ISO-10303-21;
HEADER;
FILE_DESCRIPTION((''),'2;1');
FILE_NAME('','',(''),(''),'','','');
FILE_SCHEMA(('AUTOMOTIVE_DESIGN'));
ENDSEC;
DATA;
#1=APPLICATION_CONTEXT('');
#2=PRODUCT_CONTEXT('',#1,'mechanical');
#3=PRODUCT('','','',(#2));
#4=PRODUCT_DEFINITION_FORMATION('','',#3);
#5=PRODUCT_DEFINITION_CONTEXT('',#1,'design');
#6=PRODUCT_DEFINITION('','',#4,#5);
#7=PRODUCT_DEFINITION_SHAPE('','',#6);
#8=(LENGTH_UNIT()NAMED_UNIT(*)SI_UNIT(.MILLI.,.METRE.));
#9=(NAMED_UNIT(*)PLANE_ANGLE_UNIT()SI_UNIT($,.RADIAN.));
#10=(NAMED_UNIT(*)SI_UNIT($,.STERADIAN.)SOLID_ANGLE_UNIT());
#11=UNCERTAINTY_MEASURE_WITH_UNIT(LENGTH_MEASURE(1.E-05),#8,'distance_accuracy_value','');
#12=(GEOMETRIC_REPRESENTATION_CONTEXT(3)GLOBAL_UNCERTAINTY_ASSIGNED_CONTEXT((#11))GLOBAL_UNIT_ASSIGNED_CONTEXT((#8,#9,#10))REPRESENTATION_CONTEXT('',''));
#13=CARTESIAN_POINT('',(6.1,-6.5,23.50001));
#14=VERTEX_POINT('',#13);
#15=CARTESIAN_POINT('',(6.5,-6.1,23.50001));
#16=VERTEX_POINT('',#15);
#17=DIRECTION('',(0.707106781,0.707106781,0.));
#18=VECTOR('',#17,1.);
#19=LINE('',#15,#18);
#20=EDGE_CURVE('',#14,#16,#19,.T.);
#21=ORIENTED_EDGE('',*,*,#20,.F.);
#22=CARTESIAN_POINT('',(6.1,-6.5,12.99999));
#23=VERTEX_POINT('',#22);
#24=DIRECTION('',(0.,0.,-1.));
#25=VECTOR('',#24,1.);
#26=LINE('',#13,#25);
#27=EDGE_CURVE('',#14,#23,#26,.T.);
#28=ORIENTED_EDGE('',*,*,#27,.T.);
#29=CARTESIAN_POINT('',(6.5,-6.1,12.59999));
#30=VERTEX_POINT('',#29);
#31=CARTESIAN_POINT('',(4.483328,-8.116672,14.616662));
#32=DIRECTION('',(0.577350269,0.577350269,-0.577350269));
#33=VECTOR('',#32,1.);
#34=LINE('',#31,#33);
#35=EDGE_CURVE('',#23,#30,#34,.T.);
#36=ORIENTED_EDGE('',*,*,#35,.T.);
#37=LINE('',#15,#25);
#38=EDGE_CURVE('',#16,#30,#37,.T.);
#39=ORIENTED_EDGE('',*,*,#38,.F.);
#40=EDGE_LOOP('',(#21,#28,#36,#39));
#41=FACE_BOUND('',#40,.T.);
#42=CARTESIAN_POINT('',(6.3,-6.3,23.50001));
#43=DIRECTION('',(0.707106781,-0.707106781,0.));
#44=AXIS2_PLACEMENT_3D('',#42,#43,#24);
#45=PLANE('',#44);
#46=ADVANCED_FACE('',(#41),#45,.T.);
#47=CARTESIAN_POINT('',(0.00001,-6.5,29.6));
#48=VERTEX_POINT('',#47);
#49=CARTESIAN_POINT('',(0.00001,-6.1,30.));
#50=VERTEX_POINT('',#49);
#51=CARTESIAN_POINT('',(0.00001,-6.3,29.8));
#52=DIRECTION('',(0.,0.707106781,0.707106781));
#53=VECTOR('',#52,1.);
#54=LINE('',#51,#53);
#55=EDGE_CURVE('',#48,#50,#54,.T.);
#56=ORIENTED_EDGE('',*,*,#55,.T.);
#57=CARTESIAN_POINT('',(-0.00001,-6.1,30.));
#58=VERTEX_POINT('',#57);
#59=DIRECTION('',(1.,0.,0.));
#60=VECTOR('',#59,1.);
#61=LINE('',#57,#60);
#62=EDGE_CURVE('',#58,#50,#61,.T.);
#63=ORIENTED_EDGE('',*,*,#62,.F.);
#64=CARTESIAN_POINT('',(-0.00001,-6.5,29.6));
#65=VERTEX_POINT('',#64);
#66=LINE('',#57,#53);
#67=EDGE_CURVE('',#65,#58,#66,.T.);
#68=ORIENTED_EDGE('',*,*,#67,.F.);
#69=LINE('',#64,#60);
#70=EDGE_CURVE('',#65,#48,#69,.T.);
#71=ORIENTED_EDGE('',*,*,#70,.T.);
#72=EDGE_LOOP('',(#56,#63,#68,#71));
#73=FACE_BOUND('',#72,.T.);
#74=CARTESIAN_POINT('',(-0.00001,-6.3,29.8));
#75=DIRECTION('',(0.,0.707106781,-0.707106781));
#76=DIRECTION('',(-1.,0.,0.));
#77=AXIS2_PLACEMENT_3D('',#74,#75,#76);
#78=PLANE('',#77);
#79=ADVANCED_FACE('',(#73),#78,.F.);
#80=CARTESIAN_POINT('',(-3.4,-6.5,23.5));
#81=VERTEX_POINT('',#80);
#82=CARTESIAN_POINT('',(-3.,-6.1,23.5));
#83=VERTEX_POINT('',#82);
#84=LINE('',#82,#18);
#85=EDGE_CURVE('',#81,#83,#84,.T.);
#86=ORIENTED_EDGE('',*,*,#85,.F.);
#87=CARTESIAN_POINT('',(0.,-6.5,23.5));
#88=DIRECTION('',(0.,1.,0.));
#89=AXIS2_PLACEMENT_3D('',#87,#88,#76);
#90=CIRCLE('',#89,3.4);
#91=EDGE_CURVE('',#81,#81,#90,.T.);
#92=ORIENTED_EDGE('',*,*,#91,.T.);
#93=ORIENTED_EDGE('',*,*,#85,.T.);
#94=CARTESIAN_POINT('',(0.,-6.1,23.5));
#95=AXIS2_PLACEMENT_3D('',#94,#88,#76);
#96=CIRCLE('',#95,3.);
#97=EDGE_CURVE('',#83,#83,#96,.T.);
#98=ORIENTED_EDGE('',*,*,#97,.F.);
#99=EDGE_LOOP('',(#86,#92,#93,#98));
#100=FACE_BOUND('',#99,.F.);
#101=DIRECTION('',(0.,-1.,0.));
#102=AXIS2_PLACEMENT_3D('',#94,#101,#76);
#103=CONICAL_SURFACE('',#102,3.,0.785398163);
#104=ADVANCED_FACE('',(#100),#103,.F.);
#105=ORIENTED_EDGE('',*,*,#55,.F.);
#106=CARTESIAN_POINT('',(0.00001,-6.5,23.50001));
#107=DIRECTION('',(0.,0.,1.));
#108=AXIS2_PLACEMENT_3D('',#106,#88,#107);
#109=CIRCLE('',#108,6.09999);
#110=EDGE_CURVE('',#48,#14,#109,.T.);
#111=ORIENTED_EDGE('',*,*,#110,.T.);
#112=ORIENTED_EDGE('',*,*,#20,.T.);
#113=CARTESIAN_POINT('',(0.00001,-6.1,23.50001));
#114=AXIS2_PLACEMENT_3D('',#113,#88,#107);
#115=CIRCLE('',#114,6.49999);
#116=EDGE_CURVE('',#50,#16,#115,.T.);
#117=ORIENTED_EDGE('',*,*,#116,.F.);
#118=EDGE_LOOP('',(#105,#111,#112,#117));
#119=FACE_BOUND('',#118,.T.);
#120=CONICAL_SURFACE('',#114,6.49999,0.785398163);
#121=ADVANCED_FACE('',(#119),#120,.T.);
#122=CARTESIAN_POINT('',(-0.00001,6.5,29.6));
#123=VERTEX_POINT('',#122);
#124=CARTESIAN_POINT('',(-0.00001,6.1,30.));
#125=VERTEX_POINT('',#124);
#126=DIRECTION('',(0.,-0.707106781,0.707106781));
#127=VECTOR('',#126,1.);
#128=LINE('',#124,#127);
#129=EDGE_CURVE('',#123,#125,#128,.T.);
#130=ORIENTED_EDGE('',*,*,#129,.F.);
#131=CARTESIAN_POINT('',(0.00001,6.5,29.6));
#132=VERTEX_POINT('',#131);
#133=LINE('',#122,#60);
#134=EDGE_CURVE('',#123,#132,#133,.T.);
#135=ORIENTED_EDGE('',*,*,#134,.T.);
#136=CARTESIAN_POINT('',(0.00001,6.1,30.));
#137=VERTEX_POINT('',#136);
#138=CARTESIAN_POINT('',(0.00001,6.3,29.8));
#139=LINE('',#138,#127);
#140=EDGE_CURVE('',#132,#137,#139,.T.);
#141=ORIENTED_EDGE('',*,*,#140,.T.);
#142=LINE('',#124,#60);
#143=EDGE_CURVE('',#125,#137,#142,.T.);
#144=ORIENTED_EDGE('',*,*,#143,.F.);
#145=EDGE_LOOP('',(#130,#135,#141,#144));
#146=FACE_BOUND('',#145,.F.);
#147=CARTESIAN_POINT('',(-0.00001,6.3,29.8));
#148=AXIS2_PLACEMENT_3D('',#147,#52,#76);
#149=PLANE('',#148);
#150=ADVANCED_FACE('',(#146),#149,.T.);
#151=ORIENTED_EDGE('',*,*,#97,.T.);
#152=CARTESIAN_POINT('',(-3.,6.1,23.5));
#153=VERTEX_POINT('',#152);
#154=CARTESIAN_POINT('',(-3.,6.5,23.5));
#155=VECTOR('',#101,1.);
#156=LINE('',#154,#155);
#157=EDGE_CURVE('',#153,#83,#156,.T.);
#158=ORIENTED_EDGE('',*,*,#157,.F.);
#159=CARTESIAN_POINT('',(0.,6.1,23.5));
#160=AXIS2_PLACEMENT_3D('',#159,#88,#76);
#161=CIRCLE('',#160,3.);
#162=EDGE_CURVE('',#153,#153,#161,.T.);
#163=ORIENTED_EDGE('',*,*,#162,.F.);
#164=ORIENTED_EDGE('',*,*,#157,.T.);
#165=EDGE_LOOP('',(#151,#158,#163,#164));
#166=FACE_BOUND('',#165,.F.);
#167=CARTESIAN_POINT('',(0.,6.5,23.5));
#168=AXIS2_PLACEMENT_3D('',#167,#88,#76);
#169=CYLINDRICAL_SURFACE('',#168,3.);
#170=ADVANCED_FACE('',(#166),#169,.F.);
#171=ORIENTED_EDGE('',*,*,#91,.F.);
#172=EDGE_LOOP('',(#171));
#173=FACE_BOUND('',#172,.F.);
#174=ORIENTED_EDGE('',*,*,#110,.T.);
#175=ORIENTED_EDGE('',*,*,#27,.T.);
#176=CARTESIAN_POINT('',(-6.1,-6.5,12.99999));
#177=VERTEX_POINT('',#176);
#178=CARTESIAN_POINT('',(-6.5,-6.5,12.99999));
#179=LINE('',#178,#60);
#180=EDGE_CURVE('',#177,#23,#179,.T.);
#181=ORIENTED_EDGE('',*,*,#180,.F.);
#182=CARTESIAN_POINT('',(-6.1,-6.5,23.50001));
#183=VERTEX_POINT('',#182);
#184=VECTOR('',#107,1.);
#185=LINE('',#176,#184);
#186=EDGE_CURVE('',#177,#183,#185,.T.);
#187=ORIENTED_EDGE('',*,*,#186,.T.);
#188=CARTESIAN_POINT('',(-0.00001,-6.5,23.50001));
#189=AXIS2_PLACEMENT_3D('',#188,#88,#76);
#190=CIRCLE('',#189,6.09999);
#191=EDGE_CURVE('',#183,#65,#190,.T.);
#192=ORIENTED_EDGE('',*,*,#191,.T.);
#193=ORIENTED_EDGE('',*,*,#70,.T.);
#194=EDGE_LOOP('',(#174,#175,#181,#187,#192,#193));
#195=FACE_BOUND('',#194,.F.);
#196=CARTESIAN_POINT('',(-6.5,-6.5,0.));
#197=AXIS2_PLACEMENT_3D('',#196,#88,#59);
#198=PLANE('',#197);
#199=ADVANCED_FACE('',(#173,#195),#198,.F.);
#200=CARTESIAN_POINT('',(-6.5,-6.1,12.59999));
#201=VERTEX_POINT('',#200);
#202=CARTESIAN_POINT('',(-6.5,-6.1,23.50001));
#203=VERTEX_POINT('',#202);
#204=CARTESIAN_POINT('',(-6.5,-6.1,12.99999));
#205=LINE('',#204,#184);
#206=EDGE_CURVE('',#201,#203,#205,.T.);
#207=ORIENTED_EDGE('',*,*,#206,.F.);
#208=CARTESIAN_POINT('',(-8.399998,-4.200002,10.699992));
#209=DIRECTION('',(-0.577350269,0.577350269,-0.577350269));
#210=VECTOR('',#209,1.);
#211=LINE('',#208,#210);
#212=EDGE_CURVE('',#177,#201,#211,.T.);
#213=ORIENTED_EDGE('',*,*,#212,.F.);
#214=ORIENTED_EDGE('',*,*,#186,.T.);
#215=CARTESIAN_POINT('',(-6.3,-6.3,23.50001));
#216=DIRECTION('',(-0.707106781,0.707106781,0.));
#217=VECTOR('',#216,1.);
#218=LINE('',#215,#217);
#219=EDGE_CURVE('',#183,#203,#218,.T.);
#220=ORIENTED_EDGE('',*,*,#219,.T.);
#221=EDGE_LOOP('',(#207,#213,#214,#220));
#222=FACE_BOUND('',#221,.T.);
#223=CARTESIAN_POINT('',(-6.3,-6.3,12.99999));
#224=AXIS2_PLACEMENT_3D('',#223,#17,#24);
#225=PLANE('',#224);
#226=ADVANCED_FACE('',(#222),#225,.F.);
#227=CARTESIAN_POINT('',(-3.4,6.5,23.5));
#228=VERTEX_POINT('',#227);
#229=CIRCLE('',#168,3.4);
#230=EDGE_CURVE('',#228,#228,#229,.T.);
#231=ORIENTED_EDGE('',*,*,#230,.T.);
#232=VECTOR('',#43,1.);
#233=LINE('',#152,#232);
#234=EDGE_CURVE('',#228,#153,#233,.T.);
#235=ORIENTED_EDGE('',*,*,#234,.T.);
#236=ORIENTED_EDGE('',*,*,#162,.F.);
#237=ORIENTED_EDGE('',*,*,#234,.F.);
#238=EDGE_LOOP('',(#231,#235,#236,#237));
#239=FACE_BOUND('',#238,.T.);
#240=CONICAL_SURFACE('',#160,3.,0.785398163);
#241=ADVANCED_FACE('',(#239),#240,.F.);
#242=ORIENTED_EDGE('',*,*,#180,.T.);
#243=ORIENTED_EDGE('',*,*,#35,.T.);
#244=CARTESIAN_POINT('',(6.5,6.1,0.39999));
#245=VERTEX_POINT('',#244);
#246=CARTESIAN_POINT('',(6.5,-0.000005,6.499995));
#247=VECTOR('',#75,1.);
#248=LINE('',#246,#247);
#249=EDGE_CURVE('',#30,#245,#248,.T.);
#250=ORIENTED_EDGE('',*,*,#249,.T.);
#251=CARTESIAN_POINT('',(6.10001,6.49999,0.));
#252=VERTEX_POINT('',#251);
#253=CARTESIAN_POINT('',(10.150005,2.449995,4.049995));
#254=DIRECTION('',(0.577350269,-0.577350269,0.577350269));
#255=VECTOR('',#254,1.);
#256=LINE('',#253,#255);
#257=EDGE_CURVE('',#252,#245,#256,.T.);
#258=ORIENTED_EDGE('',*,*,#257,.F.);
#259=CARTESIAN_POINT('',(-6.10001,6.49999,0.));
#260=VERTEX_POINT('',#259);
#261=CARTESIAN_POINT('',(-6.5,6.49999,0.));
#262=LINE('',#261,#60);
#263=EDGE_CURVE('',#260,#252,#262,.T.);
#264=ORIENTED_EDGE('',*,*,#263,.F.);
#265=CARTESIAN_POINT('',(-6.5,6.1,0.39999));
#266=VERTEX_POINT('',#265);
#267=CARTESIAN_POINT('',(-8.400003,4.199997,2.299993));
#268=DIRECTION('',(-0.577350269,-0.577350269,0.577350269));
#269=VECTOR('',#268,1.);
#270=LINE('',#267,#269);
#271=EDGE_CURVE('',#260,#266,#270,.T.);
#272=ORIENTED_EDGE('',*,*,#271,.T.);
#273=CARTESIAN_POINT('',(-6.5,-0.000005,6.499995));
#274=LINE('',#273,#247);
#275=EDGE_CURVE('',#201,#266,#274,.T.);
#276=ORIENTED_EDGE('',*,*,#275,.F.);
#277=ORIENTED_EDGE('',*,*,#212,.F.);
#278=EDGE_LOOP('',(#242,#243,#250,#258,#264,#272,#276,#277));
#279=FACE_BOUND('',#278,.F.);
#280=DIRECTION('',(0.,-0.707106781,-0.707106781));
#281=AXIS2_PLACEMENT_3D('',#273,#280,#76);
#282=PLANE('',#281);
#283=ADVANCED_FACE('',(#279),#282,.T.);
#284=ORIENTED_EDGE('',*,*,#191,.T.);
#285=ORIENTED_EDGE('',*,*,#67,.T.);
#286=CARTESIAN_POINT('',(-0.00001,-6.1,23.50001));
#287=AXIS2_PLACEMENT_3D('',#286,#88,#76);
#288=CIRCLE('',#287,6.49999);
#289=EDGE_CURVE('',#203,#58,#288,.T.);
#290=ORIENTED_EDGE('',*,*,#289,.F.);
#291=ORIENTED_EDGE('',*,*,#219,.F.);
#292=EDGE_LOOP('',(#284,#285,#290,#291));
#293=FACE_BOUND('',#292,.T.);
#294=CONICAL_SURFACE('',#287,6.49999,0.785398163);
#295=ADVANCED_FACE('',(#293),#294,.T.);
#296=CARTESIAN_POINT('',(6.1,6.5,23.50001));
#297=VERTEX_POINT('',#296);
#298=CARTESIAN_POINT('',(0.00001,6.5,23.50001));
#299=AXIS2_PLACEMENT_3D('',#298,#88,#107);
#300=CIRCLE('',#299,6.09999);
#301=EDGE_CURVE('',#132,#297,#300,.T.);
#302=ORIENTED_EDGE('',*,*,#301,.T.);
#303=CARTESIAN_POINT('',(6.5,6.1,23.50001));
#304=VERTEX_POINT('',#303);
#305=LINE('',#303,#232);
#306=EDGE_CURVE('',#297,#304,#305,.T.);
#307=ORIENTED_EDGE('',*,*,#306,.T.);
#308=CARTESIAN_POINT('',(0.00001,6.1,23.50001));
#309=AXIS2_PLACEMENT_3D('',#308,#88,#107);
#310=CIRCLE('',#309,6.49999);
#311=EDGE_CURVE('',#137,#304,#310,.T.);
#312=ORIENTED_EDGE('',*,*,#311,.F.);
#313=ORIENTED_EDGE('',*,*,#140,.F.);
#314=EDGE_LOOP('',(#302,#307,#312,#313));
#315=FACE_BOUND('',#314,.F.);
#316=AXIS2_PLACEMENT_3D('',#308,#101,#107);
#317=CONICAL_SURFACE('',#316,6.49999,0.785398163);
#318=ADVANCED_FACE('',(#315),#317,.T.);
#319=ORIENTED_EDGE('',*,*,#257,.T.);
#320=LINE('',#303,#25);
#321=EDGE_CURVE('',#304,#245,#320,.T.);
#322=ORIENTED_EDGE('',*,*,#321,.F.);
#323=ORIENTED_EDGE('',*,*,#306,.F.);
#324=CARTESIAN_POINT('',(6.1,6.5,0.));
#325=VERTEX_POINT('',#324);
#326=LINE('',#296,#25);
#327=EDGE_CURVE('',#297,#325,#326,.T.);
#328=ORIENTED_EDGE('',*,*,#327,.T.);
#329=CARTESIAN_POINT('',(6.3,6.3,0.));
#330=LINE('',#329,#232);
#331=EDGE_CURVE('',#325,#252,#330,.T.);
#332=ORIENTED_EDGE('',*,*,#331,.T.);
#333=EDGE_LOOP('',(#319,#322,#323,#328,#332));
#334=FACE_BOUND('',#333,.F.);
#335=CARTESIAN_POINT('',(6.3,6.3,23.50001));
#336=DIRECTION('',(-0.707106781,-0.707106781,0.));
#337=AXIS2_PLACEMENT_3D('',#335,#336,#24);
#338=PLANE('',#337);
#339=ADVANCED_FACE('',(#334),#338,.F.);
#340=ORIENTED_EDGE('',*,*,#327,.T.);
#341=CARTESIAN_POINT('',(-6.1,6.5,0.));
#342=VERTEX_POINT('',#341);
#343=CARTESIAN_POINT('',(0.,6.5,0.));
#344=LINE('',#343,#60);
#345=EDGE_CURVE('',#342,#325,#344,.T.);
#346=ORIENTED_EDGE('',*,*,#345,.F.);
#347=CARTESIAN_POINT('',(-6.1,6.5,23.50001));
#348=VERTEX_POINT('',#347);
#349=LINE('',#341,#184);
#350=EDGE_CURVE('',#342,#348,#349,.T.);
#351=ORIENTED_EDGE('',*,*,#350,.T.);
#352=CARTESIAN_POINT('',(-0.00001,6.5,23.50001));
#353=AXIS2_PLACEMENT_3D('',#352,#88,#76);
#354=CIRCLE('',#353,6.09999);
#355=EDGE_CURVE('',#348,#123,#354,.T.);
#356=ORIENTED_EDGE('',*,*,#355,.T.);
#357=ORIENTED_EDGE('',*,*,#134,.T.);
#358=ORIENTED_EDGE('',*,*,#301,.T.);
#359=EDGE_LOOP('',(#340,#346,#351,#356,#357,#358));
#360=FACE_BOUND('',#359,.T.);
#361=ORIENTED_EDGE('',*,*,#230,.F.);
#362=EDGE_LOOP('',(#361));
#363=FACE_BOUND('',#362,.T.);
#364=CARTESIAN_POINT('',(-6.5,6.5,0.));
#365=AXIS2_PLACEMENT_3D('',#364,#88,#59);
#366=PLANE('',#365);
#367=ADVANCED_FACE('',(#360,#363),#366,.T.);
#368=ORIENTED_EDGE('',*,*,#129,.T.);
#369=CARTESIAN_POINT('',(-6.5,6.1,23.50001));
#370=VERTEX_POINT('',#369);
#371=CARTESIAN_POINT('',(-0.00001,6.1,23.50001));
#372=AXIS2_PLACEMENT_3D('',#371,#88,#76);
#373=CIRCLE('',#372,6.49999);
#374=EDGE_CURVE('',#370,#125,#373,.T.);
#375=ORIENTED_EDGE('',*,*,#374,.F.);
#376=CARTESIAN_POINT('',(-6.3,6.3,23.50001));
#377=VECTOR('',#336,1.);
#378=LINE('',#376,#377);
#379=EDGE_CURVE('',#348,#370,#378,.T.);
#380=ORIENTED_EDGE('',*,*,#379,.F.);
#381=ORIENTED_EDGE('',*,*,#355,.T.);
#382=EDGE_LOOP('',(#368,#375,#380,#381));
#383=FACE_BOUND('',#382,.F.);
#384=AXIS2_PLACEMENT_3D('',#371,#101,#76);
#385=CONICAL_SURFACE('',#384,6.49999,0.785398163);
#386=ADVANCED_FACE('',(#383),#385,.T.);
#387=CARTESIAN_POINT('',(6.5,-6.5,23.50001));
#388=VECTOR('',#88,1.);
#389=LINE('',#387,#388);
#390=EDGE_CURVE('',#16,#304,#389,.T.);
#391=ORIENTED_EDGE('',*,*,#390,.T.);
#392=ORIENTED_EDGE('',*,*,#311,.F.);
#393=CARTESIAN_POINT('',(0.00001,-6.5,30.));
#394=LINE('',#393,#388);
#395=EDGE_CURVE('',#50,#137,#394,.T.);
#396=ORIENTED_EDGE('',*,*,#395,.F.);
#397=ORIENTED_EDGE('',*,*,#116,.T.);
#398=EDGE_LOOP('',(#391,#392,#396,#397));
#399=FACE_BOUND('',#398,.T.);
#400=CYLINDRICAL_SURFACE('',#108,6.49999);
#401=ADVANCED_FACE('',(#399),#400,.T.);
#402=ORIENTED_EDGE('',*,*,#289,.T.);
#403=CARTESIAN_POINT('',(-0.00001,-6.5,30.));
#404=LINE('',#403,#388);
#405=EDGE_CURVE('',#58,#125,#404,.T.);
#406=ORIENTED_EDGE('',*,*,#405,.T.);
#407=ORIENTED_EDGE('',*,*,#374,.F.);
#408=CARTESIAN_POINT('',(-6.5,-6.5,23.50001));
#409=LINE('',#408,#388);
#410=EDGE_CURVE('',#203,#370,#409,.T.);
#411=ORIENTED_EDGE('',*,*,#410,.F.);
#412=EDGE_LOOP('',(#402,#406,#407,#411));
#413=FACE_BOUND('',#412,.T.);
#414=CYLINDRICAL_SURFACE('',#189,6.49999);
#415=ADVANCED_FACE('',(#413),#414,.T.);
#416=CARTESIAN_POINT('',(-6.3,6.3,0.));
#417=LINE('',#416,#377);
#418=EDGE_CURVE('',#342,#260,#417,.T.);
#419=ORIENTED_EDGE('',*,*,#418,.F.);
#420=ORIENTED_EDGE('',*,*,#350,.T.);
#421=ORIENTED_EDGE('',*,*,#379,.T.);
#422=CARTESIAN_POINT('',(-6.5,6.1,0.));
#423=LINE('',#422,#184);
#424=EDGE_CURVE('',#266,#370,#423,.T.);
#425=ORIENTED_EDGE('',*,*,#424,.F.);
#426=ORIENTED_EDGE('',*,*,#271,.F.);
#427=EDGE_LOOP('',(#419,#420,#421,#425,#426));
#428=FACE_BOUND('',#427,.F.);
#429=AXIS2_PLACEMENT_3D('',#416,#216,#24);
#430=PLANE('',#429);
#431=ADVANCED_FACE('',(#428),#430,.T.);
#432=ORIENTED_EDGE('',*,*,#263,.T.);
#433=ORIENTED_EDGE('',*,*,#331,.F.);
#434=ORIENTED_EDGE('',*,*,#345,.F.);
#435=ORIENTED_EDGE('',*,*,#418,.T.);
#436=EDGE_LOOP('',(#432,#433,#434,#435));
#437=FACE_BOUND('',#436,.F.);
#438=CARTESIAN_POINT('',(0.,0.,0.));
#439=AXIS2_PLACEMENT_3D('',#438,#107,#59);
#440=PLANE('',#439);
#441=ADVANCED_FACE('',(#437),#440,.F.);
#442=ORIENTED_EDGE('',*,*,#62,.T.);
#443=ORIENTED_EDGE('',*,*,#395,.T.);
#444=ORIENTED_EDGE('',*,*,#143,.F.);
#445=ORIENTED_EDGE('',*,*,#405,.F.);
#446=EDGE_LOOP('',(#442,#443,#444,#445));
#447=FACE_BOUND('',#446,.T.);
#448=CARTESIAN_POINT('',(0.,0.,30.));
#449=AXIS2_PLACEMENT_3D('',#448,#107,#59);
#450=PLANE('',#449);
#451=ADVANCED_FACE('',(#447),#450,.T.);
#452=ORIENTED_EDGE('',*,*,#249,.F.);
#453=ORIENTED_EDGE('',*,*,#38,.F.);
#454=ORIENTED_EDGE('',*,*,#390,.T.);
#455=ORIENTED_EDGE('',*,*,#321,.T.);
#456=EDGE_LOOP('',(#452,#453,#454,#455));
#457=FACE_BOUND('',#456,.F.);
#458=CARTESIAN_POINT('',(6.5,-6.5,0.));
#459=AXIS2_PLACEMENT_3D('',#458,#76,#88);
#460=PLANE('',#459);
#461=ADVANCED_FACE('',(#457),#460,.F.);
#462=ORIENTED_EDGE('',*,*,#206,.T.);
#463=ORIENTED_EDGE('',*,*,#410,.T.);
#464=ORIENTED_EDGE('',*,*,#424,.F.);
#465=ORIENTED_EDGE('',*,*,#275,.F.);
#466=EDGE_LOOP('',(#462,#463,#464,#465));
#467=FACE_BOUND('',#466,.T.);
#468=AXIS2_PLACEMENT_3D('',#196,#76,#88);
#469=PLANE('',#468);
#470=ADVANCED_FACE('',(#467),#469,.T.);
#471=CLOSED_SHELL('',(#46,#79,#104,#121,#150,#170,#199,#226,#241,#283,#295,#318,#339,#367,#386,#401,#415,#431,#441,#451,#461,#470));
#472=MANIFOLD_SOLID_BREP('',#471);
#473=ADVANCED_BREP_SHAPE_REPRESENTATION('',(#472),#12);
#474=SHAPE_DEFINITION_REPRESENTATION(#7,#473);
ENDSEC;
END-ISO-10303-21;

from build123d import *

# Parameters (mm, degrees)
F0_W     = 13
F0_H     = 13
F1_DEPTH = 30
F2_SIZE  = 12.99999
F3_R     = 6.49999
F4_R     = 3
F5_DEPTH = 25
F6_SIZE  = 0.4


# Not quite as in the source:
# - a fillet or chamfer is up to 0.001 mm smaller than in the source, because OpenCascade refuses the exact size


with BuildPart() as f1:
    # F0 (on Top) → F1 (new body)
    with BuildSketch(Plane.XY):
        Rectangle(F0_W, F0_H)
    extrude(amount=F1_DEPTH)

    # F2 (size 13 in the source; OpenCascade refuses exactly that, so slightly less here)
    f2_edges = [f1.edges().sort_by_distance(p)[0] for p in [
        (0, -6.5, 0),
    ]]
    chamfer(f2_edges, length=F2_SIZE)

    # F3 (radius 6.5 in the source; OpenCascade refuses exactly that, so slightly less here)
    f3_edges = [f1.edges().sort_by_distance(p)[0] for p in [
        (6.5, 0, 30),
        (-6.5, 0, 30),
    ]]
    fillet(f3_edges, radius=F3_R)

    # F4 (on face) → F5 (cut)
    with BuildSketch(Plane(origin=(0, 6.5, 0), x_dir=(-1, 0, 0), z_dir=(0, 1, 0))):
        with Locations((0, 23.5)):
            Circle(F4_R)
    extrude(amount=-F5_DEPTH, mode=Mode.SUBTRACT)

    # F6
    f6_edges = [f1.edges().sort_by_distance(p)[0] for p in [
        (4.596197, 6.5, 28.096197),
        (4.596197, -6.5, 28.096197),
        (3, 6.5, 23.5),
        (3, -6.5, 23.5),
    ]]
    chamfer(f6_edges, length=F6_SIZE)


solid = f1.part
